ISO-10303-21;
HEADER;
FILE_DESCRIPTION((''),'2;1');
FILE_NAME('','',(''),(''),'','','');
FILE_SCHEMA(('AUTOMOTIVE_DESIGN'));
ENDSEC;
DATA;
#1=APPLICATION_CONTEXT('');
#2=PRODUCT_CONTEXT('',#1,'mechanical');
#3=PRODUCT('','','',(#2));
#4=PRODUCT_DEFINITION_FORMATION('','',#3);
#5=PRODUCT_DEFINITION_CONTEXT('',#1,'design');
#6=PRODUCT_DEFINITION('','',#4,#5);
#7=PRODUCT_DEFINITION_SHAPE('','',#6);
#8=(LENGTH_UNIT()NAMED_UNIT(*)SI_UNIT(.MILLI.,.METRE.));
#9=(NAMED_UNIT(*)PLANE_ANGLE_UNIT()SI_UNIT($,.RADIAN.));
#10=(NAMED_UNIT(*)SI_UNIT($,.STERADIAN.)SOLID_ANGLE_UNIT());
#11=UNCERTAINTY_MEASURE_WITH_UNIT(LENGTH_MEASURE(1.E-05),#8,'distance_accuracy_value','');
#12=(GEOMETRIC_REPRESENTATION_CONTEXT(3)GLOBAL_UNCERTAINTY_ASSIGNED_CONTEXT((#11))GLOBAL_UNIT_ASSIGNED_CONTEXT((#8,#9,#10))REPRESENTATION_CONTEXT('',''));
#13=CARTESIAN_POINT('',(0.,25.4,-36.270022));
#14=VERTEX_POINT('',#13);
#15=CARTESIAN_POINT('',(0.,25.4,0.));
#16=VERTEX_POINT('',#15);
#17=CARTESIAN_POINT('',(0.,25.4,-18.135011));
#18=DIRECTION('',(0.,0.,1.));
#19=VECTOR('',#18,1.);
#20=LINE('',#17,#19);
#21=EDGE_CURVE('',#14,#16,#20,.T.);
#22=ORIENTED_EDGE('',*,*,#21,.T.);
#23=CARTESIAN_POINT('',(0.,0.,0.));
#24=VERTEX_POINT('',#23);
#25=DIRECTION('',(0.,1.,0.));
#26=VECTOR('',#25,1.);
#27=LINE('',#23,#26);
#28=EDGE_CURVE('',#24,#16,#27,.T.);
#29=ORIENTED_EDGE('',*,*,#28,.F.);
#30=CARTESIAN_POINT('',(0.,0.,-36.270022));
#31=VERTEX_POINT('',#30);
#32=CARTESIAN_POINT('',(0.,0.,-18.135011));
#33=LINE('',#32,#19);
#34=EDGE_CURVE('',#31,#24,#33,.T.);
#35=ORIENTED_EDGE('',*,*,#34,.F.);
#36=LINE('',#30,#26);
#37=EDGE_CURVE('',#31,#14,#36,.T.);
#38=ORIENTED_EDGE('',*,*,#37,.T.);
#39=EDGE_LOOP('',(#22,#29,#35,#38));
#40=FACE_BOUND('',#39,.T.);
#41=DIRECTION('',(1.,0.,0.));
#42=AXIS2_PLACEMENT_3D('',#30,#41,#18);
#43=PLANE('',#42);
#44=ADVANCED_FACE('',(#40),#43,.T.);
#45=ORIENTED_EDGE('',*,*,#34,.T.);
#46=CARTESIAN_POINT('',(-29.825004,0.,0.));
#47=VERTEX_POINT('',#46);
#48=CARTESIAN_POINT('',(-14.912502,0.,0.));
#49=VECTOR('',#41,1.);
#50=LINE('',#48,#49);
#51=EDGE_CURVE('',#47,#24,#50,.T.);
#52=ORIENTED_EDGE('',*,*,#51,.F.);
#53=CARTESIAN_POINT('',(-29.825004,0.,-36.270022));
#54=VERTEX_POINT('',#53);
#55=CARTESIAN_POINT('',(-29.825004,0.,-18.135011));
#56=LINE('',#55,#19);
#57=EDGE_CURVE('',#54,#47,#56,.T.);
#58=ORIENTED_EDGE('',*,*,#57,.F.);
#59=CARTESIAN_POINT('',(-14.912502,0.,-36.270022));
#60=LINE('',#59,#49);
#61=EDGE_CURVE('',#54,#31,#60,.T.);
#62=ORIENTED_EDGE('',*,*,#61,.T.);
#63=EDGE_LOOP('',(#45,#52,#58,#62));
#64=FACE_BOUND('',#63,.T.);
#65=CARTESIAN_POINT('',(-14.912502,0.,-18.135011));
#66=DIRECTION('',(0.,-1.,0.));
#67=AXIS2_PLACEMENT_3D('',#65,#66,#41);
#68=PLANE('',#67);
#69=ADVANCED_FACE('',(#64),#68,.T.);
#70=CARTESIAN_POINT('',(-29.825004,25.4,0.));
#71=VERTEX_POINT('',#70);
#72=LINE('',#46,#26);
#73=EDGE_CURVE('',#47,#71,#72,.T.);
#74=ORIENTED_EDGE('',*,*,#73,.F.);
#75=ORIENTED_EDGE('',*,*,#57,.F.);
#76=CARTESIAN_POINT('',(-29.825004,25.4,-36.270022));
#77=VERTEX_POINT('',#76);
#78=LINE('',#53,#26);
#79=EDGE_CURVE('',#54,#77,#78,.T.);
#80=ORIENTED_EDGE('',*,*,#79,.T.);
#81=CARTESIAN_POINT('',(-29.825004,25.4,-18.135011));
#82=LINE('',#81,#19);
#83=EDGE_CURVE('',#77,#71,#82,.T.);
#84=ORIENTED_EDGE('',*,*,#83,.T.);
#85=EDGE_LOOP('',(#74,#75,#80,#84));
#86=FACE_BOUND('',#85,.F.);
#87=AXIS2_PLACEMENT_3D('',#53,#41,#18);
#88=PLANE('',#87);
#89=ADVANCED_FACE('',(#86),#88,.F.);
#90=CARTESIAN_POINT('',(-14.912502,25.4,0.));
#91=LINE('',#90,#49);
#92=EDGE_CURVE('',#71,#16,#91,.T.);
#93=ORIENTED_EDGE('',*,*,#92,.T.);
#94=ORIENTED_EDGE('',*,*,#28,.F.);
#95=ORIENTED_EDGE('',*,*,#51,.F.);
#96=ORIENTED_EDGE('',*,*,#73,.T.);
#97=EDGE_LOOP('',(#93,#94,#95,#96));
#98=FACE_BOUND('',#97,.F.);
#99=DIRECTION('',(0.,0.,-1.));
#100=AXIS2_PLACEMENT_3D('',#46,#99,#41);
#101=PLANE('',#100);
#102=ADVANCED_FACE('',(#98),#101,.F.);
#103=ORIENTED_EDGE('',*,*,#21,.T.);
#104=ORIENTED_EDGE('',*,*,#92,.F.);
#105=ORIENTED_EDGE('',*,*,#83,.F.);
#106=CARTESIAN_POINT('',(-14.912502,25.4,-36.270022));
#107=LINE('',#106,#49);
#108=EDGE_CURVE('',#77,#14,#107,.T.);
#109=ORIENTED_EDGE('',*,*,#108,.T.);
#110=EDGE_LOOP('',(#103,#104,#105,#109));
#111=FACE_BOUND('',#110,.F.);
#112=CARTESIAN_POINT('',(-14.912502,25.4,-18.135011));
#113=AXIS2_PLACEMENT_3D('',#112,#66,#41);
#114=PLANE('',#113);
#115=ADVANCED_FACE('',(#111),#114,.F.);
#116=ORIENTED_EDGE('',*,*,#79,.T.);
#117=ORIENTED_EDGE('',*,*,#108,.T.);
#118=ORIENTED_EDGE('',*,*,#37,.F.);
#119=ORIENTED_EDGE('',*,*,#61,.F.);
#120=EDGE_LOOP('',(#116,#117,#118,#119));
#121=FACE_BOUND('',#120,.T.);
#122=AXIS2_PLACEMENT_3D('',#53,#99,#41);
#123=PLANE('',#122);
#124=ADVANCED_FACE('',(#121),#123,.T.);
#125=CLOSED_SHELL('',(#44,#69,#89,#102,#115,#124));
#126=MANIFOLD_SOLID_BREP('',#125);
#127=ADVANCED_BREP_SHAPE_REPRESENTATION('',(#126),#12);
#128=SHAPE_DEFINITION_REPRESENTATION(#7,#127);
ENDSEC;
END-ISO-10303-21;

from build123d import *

# Parameters (mm, degrees)
F0_W     = 29.8250038177
F0_H     = 36.2700223923
F1_DEPTH = 25.4


# Not quite as in the source:
# - a feature names something its author has since deleted; it is built from what else it names


with BuildPart() as f1:
    # F0 (on Front) → F1 (new body)
    with BuildSketch(Plane.XZ):
        with Locations((-14.9125019088, -18.1350111961)):
            Rectangle(F0_W, F0_H)
    extrude(amount=-F1_DEPTH)


solid = f1.part
